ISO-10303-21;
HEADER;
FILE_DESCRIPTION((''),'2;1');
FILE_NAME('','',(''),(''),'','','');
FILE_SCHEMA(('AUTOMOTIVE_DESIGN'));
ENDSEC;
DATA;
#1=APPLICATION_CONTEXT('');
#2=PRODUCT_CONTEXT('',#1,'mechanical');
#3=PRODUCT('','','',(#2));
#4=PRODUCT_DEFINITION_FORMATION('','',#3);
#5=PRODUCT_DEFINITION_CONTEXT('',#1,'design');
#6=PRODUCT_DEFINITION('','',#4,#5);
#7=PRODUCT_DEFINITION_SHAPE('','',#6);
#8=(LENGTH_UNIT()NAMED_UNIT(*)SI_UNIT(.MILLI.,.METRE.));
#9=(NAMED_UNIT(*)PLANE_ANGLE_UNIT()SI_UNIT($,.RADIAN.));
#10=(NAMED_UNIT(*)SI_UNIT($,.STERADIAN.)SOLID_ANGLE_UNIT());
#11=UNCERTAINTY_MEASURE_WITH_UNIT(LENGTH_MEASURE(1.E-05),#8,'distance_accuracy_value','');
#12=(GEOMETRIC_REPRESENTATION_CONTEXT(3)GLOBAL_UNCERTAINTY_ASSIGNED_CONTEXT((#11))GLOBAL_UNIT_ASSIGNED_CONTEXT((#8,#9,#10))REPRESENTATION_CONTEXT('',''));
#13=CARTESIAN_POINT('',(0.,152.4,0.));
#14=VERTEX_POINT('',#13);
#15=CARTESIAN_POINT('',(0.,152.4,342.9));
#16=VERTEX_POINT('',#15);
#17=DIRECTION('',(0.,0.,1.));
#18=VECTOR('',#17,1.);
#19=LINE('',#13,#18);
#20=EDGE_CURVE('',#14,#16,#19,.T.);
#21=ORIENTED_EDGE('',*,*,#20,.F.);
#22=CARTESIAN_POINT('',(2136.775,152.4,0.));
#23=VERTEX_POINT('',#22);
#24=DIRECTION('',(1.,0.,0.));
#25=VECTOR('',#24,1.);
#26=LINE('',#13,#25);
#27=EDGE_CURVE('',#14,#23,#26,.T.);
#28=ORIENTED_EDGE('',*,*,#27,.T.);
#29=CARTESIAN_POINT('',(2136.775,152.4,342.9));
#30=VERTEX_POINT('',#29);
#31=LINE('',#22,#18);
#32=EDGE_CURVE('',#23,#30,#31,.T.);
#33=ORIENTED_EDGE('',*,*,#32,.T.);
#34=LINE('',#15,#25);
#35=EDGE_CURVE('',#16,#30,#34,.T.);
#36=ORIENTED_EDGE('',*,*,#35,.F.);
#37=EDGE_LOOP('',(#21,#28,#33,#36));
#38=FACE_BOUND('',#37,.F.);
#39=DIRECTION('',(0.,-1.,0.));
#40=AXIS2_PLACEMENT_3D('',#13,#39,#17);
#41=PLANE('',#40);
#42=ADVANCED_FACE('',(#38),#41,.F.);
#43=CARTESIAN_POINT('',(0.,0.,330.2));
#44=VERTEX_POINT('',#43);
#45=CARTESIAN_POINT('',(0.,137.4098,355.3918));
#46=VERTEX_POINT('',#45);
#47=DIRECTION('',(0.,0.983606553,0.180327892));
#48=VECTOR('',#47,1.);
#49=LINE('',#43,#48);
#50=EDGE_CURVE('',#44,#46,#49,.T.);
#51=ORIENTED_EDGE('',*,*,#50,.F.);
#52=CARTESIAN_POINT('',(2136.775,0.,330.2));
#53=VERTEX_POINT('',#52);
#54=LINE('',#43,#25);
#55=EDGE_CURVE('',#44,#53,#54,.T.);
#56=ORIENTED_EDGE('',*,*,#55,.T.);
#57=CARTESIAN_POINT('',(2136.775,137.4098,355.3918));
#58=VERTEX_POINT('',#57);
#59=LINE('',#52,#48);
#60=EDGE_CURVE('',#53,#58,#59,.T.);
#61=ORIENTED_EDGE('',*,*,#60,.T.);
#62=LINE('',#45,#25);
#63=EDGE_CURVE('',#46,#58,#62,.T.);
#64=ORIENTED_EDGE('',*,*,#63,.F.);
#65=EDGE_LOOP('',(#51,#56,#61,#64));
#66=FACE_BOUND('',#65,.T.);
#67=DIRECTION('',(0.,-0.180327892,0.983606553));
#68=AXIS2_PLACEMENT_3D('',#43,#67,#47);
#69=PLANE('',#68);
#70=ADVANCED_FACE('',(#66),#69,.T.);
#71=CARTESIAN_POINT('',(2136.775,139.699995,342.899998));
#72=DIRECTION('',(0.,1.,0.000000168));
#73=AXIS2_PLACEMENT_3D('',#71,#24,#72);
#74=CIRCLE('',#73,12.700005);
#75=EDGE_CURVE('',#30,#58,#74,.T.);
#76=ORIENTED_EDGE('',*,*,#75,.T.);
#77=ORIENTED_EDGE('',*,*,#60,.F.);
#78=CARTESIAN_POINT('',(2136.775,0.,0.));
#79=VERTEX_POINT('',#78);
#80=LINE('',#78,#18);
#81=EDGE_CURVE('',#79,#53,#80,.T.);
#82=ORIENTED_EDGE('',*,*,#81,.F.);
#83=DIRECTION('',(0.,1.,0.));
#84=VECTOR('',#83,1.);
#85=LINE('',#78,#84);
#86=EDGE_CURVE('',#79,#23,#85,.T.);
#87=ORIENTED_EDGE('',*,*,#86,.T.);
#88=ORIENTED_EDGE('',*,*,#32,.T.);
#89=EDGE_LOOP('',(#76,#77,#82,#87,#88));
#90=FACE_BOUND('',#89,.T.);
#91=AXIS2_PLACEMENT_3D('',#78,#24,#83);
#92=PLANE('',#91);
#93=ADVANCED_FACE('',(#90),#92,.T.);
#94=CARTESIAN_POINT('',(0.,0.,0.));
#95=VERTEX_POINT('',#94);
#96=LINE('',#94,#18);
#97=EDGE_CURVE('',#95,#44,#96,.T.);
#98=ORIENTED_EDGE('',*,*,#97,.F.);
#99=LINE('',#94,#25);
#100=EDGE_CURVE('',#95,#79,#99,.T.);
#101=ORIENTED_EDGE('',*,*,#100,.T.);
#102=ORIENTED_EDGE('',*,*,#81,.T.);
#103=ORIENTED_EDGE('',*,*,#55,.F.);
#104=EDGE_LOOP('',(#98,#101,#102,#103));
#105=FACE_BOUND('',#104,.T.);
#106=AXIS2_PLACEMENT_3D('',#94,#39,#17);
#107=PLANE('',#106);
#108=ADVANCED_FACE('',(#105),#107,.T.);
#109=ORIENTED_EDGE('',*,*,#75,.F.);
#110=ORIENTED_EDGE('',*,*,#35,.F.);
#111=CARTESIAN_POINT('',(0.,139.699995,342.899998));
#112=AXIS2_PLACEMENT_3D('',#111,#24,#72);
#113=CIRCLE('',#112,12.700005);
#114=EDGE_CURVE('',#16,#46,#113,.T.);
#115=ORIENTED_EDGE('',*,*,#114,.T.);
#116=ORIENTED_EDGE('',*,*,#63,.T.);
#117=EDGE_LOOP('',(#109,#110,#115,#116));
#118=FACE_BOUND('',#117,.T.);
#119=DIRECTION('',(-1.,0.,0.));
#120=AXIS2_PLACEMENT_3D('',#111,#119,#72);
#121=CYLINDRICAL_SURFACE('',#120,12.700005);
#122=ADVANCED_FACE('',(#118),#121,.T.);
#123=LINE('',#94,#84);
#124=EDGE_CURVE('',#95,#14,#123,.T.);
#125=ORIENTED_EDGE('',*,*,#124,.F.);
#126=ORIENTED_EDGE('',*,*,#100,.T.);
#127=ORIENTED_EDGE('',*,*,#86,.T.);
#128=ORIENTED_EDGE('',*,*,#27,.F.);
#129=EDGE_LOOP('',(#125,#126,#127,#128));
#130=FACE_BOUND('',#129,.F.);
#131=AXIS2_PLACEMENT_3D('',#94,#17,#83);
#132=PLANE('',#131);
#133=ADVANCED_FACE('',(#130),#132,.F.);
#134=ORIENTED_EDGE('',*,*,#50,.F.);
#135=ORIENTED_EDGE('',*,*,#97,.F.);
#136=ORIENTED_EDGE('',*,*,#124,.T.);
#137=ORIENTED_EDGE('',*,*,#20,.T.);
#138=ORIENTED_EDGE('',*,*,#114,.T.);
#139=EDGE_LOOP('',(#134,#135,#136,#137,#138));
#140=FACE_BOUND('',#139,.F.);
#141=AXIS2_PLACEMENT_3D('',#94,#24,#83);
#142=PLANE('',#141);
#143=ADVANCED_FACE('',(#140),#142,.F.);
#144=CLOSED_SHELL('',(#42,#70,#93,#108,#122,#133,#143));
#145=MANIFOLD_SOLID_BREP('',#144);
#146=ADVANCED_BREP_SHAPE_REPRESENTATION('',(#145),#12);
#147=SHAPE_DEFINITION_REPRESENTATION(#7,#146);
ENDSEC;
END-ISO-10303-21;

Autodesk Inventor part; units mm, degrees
ref_plane "YZ Plane" through (0, 0, 0) normal (1, 0, 0) x (0, 1, 0)
ref_plane "XZ Plane" through (0, 0, 0) normal (0, 1, 0) x (-1, 0, 0)
ref_plane "XY Plane" through (0, 0, 0) normal (0, 0, 1) x (1, 0, 0)
sketch "Profile" plane through (0, 0, 0) normal (0, 0, 1) x (1, 0, 0)
  line L0 (0, 0) -> (0, 330.2)
  line L1 (0, 0) -> (152.4, 0)
  line L2 (152.4, 0) -> (152.4, 342.9)
  line L3 (152.4, 342.9) -> (139.7, 342.9) construction
  line L4 (152.4, 342.9) -> (139.7, 342.9) construction
  arc A0 (152.4, 342.9) -> (137.4098, 355.3918) centre (139.7, 342.9) ccw
  line L5 (0, 330.2) -> (137.4098, 355.3918)
  dimension "d0" = 330.2
  dimension "d1" = 152.4
  dimension "d2" = 342.9
  dimension "d3" = 12.7
  dimension "d4" = 12.7
sketch "Sketch1" plane through (0, 0, 0) normal (1, 0, 0) x (0, 1, 0)
  line L0 (0, 0) -> (0, 330.2)
  line L1 (0, 0) -> (152.4, 0)
  line L2 (152.4, 0) -> (152.4, 342.9)
  line L3 (152.4, 342.9) -> (139.7, 342.9) construction
  line L4 (152.4, 342.9) -> (139.7, 342.9) construction
  arc A0 (152.4, 342.9) -> (137.4098, 355.3918) centre (139.7, 342.9) ccw
  line L5 (0, 330.2) -> (137.4098, 355.3918)
extrude "Extrusion1" add sketch "Sketch1" along normal blind 2136.775
properties part number "E" material "Granite, Cut, Polished"
